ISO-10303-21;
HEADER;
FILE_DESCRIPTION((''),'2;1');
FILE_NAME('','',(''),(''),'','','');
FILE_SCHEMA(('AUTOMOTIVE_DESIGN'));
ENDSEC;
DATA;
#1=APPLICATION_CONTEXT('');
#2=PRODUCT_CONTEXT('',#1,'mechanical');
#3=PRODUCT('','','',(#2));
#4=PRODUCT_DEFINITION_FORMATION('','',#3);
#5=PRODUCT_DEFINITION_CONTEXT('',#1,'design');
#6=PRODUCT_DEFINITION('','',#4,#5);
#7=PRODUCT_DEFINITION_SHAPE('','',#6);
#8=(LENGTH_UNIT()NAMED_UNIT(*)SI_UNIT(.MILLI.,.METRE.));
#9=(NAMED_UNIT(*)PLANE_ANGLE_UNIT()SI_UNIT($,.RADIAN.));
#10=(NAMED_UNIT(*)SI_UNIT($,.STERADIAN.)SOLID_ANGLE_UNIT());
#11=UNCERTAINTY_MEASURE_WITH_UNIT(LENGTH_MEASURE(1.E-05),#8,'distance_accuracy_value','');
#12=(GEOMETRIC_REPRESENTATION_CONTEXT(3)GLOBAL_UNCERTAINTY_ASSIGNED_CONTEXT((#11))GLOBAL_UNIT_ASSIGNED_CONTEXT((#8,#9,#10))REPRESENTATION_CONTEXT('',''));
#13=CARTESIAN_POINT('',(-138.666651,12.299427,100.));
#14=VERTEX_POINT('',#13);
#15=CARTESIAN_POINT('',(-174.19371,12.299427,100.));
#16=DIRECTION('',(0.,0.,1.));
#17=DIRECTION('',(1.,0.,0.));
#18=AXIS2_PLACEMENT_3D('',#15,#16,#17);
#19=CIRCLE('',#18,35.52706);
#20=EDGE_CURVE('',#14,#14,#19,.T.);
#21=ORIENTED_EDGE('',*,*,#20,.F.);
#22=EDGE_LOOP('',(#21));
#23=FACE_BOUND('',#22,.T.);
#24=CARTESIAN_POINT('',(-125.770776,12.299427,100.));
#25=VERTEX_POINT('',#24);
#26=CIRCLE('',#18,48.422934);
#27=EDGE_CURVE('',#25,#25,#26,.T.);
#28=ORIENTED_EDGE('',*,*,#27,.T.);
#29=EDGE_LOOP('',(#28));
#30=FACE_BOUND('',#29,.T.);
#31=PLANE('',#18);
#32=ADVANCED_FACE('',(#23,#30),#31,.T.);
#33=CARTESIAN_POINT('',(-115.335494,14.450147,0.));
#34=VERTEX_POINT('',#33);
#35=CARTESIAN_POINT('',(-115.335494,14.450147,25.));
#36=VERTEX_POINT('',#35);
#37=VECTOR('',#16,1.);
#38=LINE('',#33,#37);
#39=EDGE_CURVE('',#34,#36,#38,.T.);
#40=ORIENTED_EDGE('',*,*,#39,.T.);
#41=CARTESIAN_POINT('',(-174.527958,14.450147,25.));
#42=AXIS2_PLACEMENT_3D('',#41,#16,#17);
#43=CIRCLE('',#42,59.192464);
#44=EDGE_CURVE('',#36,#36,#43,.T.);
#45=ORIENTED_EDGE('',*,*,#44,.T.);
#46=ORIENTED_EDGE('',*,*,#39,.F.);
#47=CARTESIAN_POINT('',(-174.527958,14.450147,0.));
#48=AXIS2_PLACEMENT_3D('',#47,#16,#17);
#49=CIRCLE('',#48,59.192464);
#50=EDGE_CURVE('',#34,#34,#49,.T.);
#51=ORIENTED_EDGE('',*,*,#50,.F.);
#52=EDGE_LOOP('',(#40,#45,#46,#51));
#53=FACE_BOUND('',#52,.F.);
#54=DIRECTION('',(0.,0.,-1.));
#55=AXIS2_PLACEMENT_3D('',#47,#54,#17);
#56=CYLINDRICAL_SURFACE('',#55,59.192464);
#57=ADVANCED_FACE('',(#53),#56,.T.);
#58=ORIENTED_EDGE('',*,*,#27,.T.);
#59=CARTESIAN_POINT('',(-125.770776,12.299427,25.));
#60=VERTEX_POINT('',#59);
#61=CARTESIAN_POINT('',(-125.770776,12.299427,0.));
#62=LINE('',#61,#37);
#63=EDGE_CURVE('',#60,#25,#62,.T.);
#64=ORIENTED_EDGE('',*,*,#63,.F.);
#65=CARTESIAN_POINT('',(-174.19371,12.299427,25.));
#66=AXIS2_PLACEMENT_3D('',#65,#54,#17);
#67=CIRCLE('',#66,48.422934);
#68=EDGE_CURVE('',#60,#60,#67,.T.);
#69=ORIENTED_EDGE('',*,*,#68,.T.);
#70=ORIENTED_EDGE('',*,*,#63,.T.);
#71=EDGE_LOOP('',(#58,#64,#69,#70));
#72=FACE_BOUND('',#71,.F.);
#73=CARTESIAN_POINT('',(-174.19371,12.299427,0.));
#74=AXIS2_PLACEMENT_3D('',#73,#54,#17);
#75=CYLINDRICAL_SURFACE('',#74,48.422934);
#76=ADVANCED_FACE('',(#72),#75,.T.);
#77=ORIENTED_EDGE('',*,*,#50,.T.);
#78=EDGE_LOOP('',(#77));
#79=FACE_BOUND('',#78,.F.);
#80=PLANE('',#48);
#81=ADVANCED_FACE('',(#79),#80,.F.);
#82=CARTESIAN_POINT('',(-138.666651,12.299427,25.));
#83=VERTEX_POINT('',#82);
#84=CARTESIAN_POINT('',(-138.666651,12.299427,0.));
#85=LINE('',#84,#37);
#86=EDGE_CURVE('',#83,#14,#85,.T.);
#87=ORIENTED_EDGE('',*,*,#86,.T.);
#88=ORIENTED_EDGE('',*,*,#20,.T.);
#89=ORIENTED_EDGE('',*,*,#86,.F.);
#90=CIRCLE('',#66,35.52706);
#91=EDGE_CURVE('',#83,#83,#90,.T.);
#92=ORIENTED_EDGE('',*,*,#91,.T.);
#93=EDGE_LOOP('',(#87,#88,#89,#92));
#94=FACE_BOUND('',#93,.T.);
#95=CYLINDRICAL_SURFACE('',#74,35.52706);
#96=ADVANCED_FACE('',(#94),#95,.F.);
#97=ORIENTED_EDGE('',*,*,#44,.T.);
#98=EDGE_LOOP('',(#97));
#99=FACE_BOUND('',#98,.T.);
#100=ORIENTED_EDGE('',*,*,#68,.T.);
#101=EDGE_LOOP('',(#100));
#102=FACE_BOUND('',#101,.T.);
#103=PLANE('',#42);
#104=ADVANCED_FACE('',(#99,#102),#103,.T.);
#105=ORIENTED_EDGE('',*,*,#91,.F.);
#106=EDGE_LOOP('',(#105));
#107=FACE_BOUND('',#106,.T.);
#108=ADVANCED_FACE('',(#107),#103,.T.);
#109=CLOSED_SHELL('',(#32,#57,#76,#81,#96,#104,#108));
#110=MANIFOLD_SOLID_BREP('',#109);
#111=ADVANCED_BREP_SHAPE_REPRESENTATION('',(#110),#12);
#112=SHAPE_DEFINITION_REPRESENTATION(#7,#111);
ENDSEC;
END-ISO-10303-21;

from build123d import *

# Parameters (mm, degrees)
F0_R     = 83.5800069383
F0_R_2   = 61.6002639071
F1_DEPTH = 381
F2_DEPTH = 127
F4_R     = 48.4229343949
F4_R_2   = 35.527059512
F5_DEPTH = 100
F6_R     = 59.1924644961
F7_DEPTH = 25


with BuildPart() as f1:
    # F0 (on Top) → F1 (new body)
    with BuildSketch(Plane.XY):
        with Locations((-408.8018536568, 0)):
            Circle(F0_R)
        with Locations((-408.8018536568, 0)):
            Circle(F0_R_2, mode=Mode.SUBTRACT)
    extrude(amount=F1_DEPTH)

    # F2 (add): a face of the model
    f2_faces = [f1.faces().sort_by_distance(p)[0] for p in [
        (-490.0178610079, 0, 381),
    ]]
    extrude(f2_faces, amount=F2_DEPTH)


with BuildPart() as f5:
    # F4 (on Top) → F5 (new body)
    with BuildSketch(Plane.XY):
        with Locations((-174.1937100887, 12.2994268313)):
            Circle(F4_R)
        with Locations((-174.1937100887, 12.2994268313)):
            Circle(F4_R_2, mode=Mode.SUBTRACT)
    extrude(amount=F5_DEPTH)

    # F6 (on Top) → F7 (join)
    with BuildSketch(Plane.XY):
        with Locations((-174.5279580355, 14.4501468167)):
            Circle(F6_R)
    extrude(amount=F7_DEPTH)


solid = f5.part
